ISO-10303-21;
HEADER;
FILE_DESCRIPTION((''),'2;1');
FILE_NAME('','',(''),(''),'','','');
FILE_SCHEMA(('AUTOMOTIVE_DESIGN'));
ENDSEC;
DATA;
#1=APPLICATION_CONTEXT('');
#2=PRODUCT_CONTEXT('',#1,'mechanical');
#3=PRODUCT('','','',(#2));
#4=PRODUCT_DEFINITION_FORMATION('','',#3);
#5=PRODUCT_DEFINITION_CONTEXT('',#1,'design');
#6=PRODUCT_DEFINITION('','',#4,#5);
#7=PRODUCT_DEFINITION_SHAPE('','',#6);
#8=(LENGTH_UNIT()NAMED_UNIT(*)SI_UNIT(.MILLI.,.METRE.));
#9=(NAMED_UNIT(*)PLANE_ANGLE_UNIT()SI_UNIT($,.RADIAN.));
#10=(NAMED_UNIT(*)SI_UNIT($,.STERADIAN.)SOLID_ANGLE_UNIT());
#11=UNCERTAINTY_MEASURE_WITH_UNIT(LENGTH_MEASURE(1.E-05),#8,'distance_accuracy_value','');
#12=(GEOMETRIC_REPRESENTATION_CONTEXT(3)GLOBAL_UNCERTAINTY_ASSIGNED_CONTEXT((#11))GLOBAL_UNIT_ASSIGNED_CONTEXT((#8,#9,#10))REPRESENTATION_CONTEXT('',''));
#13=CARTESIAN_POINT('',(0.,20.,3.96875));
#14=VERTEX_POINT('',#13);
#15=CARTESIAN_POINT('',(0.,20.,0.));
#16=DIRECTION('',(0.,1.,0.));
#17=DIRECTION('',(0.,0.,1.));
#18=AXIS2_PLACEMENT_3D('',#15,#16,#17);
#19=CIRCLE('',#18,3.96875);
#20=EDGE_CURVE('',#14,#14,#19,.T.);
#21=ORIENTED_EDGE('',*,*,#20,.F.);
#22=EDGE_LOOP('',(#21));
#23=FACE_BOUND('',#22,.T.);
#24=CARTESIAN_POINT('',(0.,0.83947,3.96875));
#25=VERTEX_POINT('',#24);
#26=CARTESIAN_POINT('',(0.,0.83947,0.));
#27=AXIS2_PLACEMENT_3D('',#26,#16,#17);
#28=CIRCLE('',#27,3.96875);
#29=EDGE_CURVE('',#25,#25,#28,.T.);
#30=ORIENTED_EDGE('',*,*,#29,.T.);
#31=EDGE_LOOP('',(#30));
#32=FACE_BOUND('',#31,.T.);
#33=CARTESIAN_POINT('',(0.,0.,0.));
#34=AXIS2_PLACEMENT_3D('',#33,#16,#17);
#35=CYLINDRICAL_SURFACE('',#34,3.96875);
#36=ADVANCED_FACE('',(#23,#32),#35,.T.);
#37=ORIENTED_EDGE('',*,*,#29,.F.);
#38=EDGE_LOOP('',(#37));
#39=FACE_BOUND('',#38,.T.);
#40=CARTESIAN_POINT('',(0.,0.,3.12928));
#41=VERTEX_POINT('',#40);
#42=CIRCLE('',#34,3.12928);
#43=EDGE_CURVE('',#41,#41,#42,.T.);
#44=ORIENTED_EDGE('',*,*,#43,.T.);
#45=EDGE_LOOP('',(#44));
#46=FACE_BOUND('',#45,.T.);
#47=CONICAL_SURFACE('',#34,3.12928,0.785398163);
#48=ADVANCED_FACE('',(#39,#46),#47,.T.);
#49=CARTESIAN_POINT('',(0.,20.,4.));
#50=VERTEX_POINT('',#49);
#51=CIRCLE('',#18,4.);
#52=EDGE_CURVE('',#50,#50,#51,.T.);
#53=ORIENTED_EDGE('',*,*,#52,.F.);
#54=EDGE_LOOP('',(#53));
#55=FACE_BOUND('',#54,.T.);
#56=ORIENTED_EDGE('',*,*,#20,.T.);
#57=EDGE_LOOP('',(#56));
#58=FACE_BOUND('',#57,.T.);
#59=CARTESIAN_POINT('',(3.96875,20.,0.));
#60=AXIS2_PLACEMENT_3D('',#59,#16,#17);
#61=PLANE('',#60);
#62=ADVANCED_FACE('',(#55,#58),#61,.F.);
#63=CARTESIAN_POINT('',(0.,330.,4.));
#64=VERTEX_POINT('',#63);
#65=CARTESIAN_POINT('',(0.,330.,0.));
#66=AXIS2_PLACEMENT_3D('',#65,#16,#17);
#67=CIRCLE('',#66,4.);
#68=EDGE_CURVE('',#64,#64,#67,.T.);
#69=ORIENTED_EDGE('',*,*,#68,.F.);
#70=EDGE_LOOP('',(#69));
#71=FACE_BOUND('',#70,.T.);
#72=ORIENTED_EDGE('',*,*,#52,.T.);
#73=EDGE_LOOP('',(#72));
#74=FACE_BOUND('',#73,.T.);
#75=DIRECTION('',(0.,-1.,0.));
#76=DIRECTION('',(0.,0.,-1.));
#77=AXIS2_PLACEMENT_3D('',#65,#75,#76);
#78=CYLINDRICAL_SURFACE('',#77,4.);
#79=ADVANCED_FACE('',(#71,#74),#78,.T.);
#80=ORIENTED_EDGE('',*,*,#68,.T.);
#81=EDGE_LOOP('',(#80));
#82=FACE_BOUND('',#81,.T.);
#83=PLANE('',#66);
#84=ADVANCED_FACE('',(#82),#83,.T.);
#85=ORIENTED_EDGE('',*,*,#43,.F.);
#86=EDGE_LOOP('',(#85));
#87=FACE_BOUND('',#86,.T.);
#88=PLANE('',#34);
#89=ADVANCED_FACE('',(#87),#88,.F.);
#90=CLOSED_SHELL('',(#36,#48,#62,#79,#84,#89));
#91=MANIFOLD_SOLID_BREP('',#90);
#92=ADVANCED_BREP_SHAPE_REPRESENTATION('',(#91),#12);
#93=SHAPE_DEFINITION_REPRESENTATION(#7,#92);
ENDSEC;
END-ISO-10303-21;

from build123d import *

# Parameters (mm, degrees)
SKETCH_1_R      = 4
EXTRUDE_1_DEPTH = 330


# Read off the part's stored shape, not the designer's step: 5/16-18 机械螺纹 螺柱1
with BuildPart() as part:
    # 草图1 → 凸台-拉伸1 (new body)
    with BuildSketch(Plane(origin=(0, 0, 0), x_dir=(1, 0, 0), z_dir=(0, 1, 0))):
        with Locations(Location((0, 0, 0), (0, 0, 270))):
            Circle(SKETCH_1_R)
    extrude(amount=EXTRUDE_1_DEPTH)

    # 5/16-18 机械螺纹 螺柱1 outline → 5/16-18 机械螺纹 螺柱1 (revolve, cut)
    with BuildSketch(Plane.XY):
        Polygon((3.12928, 0), (4, 0), (4, 20), (3.96875, 20), (3.96875, 0.83947), align=None)
    revolve(axis=Axis((0, 0, 0), (0, 1, 0)), mode=Mode.SUBTRACT)


solid = part.part
